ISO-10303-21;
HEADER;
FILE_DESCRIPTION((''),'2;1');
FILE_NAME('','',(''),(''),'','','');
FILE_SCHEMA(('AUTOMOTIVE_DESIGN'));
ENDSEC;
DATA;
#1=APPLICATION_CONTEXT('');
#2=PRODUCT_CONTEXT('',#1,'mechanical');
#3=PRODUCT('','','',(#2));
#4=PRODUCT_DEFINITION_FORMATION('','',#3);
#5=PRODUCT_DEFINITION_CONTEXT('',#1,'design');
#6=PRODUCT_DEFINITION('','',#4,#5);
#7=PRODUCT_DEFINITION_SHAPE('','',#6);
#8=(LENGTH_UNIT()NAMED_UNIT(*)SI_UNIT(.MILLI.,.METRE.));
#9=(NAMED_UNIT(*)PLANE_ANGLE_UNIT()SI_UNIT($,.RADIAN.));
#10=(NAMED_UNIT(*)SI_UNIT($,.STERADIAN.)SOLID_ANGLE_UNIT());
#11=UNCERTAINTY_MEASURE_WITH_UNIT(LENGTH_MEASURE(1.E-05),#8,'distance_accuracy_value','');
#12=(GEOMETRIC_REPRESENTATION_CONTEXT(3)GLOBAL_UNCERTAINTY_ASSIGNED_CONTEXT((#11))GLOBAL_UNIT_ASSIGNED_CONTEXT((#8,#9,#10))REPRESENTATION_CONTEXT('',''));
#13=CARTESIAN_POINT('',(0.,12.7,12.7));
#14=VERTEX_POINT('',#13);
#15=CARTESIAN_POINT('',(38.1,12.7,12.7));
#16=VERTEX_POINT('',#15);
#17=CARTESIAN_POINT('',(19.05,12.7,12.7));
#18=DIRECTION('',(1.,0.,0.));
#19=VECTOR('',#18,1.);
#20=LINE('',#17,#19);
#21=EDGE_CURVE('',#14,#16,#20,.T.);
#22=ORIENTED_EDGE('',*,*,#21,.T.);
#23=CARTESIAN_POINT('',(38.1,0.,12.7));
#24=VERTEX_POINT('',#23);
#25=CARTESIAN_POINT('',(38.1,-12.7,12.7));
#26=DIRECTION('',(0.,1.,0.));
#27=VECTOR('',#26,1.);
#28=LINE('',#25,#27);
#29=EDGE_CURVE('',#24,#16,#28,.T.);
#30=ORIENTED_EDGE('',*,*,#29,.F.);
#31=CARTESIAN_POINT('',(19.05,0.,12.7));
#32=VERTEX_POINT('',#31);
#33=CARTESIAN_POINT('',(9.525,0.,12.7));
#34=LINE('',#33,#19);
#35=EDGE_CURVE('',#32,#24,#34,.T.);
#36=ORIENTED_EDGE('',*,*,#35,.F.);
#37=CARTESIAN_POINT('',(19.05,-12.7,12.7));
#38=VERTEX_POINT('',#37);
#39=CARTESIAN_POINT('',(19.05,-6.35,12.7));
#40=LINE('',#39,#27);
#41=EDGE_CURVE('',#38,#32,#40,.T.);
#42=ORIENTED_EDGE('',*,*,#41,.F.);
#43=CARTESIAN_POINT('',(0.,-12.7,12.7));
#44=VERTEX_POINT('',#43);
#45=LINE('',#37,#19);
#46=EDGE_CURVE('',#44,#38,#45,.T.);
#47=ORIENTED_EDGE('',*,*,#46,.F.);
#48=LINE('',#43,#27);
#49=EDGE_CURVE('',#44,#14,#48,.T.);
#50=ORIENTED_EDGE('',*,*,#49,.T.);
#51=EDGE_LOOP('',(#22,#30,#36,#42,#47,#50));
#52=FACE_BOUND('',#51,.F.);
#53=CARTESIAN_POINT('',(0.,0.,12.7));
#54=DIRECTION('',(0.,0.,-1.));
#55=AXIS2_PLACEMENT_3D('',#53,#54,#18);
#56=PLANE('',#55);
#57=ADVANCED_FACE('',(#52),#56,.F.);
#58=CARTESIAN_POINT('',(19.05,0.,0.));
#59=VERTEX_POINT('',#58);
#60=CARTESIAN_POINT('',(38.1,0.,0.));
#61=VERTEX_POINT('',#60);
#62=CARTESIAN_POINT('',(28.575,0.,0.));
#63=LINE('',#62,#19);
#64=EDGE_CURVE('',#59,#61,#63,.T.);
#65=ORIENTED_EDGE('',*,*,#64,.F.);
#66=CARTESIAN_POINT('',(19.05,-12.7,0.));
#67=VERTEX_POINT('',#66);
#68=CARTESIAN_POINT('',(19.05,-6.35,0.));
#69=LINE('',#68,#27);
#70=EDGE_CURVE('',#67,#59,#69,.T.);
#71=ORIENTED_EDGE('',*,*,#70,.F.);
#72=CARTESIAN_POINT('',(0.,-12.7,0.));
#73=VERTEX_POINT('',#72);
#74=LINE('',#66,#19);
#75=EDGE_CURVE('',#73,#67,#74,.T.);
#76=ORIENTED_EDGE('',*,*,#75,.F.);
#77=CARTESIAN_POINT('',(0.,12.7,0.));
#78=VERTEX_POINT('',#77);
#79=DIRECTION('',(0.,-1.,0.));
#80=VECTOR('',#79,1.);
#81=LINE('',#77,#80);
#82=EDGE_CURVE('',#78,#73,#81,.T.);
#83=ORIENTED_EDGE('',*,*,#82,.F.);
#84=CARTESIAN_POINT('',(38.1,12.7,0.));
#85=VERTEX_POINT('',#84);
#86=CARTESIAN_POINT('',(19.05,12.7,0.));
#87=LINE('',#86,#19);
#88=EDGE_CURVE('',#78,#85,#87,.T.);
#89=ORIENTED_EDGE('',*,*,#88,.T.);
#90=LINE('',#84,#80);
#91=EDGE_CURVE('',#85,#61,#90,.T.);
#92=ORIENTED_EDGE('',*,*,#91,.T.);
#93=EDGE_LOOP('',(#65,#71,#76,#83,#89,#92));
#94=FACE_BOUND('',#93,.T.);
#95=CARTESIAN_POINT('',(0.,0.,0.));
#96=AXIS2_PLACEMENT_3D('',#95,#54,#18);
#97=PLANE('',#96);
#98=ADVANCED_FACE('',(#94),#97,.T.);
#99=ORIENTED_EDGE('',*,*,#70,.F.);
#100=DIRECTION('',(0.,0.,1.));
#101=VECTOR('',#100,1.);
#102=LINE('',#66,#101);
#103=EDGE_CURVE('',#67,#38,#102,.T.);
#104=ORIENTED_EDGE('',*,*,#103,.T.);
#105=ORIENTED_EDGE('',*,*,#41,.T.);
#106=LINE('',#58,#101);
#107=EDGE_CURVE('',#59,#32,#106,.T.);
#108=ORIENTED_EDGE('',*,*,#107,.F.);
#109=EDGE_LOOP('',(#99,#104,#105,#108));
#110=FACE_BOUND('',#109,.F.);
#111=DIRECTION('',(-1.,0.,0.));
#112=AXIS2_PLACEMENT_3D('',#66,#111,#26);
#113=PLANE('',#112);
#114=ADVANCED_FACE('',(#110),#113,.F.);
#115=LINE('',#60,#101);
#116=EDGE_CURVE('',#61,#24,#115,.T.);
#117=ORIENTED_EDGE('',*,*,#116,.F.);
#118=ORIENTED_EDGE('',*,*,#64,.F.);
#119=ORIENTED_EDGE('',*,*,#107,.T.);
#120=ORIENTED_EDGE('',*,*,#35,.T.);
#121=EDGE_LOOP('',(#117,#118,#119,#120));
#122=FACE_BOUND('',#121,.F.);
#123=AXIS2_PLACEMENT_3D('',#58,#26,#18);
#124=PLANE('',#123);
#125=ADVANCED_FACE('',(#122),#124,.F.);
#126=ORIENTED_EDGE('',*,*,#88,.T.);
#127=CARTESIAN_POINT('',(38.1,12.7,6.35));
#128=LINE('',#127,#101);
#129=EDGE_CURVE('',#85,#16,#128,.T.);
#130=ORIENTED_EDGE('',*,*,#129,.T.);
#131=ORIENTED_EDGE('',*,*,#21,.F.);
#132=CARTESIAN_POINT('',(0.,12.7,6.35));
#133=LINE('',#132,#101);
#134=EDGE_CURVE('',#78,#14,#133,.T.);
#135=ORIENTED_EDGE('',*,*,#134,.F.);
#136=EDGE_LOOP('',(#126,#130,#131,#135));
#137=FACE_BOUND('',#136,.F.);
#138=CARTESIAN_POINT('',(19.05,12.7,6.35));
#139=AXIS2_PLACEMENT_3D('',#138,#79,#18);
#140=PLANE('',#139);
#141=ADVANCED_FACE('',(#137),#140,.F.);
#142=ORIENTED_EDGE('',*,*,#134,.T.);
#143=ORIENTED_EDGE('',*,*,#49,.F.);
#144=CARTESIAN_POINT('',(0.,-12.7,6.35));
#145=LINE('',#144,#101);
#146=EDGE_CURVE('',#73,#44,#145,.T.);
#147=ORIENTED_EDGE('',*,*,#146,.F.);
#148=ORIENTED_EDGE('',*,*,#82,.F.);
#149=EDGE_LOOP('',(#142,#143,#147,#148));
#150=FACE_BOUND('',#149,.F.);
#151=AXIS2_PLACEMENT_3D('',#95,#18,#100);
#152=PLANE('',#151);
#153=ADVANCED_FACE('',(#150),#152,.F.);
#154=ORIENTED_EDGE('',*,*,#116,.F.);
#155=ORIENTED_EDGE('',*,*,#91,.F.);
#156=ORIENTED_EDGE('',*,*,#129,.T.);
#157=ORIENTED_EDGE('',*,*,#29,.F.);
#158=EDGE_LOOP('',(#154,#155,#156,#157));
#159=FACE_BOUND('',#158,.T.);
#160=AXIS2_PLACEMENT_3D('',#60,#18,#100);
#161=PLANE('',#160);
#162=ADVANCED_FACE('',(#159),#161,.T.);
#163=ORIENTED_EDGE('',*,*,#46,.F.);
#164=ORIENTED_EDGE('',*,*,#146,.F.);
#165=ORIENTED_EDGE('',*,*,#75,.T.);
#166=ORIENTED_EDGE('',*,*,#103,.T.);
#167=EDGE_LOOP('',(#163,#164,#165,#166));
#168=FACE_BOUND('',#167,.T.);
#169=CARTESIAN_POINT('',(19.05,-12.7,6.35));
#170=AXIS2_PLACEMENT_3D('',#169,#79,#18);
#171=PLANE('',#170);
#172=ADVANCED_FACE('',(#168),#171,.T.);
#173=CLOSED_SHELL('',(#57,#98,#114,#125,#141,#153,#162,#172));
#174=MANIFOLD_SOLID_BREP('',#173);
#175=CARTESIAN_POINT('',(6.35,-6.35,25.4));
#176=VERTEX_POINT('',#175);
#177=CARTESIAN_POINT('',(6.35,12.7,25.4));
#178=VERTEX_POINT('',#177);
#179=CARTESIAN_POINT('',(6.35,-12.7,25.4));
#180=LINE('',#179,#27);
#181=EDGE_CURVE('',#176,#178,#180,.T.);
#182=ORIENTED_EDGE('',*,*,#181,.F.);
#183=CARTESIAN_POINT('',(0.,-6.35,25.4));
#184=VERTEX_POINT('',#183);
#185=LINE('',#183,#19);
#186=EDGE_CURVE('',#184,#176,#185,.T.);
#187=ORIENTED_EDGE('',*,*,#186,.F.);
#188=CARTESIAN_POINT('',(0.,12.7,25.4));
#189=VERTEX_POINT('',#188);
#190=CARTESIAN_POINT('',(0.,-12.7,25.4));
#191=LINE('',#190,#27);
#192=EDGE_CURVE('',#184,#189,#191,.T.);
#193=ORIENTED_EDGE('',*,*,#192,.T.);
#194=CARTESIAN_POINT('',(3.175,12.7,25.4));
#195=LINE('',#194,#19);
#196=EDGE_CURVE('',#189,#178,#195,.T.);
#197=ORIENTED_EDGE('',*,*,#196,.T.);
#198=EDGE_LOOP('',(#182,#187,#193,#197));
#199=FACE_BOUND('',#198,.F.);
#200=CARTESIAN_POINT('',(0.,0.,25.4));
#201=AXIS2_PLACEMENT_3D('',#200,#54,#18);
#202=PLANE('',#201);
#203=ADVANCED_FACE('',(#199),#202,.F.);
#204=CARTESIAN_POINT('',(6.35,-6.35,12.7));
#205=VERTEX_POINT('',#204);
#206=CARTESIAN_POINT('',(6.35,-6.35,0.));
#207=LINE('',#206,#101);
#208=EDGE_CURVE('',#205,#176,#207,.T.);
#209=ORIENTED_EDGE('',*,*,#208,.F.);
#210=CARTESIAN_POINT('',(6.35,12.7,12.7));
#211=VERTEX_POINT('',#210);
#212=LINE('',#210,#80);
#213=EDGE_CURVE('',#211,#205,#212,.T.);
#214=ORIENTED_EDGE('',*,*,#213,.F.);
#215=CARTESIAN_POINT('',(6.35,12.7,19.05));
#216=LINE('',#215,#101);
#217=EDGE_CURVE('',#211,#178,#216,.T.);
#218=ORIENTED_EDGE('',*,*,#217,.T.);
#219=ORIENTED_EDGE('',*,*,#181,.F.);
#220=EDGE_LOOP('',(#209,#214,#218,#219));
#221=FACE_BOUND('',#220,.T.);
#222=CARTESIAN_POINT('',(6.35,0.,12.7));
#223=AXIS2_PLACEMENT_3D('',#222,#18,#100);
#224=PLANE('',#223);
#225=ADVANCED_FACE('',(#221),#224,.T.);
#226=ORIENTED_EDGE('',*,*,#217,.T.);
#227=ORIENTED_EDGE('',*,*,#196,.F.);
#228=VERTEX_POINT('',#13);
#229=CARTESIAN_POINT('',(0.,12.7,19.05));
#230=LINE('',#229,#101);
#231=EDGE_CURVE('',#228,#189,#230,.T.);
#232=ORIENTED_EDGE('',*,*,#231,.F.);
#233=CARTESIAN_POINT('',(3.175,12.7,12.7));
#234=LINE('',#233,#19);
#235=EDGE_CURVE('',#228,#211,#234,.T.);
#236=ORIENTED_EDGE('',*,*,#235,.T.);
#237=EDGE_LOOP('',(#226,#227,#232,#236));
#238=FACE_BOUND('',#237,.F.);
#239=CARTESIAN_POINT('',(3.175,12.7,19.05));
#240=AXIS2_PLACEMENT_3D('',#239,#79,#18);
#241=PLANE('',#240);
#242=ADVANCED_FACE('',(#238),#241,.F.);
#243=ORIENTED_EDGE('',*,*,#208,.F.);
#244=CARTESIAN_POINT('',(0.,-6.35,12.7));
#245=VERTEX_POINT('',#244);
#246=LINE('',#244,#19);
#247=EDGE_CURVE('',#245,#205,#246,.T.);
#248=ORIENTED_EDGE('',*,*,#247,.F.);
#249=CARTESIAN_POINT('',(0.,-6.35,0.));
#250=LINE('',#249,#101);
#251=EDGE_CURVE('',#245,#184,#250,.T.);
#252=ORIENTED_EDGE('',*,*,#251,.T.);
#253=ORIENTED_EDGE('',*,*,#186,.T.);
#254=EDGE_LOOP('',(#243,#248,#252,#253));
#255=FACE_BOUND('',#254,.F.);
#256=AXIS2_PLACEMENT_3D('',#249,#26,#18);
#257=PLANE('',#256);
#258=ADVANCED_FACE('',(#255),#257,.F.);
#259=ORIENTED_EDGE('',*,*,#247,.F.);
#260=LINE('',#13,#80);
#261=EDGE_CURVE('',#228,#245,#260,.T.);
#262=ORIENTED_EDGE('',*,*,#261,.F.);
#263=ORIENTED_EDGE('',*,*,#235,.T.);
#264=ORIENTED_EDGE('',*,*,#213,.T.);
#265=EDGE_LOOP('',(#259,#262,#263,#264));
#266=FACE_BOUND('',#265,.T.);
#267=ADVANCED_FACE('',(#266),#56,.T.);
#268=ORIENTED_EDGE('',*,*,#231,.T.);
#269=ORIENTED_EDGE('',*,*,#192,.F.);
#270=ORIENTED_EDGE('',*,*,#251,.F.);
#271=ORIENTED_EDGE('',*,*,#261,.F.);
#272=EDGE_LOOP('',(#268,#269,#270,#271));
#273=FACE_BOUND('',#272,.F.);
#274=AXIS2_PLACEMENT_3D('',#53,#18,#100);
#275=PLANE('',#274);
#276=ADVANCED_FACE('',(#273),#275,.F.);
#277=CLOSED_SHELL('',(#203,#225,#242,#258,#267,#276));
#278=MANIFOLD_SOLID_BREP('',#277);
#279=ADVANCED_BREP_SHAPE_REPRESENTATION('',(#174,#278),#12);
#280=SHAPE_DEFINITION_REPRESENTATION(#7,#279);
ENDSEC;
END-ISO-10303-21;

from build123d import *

# Parameters (mm, degrees)
F0_W     = 38.1
F0_H     = 12.7
F1_DEPTH = 12.7
F2_W     = 19.05
F2_H     = 12.7
F3_DEPTH = 12.701
F4_W     = 6.35
F4_H     = 12.7
F5_DEPTH = 12.7
F6_W     = 6.35
F6_H     = 6.35
F7_DEPTH = 25.401


with BuildPart() as f1:
    # F0 (on Front) → F1 (new body, symmetric)
    with BuildSketch(Plane.XZ):
        with Locations((19.05, 6.35)):
            Rectangle(F0_W, F0_H)
    extrude(amount=F1_DEPTH, both=True)

    # F2 (on Top) → F3 (cut, through all)
    with BuildSketch(Plane.XY):
        with Locations((28.575, -6.35)):
            Rectangle(F2_W, F2_H)
    extrude(amount=F3_DEPTH, mode=Mode.SUBTRACT)


with BuildPart() as f5:
    # F4 (on Front) → F5 (new body, symmetric)
    with BuildSketch(Plane.XZ):
        with Locations((3.175, 19.05)):
            Rectangle(F4_W, F4_H)
    extrude(amount=F5_DEPTH, both=True)

    # F6 (on Top) → F7 (cut, through all)
    with BuildSketch(Plane.XY):
        with Locations((3.175, -9.525)):
            Rectangle(F6_W, F6_H)
    extrude(amount=F7_DEPTH, mode=Mode.SUBTRACT)


solid = Compound([f1.part, f5.part])
